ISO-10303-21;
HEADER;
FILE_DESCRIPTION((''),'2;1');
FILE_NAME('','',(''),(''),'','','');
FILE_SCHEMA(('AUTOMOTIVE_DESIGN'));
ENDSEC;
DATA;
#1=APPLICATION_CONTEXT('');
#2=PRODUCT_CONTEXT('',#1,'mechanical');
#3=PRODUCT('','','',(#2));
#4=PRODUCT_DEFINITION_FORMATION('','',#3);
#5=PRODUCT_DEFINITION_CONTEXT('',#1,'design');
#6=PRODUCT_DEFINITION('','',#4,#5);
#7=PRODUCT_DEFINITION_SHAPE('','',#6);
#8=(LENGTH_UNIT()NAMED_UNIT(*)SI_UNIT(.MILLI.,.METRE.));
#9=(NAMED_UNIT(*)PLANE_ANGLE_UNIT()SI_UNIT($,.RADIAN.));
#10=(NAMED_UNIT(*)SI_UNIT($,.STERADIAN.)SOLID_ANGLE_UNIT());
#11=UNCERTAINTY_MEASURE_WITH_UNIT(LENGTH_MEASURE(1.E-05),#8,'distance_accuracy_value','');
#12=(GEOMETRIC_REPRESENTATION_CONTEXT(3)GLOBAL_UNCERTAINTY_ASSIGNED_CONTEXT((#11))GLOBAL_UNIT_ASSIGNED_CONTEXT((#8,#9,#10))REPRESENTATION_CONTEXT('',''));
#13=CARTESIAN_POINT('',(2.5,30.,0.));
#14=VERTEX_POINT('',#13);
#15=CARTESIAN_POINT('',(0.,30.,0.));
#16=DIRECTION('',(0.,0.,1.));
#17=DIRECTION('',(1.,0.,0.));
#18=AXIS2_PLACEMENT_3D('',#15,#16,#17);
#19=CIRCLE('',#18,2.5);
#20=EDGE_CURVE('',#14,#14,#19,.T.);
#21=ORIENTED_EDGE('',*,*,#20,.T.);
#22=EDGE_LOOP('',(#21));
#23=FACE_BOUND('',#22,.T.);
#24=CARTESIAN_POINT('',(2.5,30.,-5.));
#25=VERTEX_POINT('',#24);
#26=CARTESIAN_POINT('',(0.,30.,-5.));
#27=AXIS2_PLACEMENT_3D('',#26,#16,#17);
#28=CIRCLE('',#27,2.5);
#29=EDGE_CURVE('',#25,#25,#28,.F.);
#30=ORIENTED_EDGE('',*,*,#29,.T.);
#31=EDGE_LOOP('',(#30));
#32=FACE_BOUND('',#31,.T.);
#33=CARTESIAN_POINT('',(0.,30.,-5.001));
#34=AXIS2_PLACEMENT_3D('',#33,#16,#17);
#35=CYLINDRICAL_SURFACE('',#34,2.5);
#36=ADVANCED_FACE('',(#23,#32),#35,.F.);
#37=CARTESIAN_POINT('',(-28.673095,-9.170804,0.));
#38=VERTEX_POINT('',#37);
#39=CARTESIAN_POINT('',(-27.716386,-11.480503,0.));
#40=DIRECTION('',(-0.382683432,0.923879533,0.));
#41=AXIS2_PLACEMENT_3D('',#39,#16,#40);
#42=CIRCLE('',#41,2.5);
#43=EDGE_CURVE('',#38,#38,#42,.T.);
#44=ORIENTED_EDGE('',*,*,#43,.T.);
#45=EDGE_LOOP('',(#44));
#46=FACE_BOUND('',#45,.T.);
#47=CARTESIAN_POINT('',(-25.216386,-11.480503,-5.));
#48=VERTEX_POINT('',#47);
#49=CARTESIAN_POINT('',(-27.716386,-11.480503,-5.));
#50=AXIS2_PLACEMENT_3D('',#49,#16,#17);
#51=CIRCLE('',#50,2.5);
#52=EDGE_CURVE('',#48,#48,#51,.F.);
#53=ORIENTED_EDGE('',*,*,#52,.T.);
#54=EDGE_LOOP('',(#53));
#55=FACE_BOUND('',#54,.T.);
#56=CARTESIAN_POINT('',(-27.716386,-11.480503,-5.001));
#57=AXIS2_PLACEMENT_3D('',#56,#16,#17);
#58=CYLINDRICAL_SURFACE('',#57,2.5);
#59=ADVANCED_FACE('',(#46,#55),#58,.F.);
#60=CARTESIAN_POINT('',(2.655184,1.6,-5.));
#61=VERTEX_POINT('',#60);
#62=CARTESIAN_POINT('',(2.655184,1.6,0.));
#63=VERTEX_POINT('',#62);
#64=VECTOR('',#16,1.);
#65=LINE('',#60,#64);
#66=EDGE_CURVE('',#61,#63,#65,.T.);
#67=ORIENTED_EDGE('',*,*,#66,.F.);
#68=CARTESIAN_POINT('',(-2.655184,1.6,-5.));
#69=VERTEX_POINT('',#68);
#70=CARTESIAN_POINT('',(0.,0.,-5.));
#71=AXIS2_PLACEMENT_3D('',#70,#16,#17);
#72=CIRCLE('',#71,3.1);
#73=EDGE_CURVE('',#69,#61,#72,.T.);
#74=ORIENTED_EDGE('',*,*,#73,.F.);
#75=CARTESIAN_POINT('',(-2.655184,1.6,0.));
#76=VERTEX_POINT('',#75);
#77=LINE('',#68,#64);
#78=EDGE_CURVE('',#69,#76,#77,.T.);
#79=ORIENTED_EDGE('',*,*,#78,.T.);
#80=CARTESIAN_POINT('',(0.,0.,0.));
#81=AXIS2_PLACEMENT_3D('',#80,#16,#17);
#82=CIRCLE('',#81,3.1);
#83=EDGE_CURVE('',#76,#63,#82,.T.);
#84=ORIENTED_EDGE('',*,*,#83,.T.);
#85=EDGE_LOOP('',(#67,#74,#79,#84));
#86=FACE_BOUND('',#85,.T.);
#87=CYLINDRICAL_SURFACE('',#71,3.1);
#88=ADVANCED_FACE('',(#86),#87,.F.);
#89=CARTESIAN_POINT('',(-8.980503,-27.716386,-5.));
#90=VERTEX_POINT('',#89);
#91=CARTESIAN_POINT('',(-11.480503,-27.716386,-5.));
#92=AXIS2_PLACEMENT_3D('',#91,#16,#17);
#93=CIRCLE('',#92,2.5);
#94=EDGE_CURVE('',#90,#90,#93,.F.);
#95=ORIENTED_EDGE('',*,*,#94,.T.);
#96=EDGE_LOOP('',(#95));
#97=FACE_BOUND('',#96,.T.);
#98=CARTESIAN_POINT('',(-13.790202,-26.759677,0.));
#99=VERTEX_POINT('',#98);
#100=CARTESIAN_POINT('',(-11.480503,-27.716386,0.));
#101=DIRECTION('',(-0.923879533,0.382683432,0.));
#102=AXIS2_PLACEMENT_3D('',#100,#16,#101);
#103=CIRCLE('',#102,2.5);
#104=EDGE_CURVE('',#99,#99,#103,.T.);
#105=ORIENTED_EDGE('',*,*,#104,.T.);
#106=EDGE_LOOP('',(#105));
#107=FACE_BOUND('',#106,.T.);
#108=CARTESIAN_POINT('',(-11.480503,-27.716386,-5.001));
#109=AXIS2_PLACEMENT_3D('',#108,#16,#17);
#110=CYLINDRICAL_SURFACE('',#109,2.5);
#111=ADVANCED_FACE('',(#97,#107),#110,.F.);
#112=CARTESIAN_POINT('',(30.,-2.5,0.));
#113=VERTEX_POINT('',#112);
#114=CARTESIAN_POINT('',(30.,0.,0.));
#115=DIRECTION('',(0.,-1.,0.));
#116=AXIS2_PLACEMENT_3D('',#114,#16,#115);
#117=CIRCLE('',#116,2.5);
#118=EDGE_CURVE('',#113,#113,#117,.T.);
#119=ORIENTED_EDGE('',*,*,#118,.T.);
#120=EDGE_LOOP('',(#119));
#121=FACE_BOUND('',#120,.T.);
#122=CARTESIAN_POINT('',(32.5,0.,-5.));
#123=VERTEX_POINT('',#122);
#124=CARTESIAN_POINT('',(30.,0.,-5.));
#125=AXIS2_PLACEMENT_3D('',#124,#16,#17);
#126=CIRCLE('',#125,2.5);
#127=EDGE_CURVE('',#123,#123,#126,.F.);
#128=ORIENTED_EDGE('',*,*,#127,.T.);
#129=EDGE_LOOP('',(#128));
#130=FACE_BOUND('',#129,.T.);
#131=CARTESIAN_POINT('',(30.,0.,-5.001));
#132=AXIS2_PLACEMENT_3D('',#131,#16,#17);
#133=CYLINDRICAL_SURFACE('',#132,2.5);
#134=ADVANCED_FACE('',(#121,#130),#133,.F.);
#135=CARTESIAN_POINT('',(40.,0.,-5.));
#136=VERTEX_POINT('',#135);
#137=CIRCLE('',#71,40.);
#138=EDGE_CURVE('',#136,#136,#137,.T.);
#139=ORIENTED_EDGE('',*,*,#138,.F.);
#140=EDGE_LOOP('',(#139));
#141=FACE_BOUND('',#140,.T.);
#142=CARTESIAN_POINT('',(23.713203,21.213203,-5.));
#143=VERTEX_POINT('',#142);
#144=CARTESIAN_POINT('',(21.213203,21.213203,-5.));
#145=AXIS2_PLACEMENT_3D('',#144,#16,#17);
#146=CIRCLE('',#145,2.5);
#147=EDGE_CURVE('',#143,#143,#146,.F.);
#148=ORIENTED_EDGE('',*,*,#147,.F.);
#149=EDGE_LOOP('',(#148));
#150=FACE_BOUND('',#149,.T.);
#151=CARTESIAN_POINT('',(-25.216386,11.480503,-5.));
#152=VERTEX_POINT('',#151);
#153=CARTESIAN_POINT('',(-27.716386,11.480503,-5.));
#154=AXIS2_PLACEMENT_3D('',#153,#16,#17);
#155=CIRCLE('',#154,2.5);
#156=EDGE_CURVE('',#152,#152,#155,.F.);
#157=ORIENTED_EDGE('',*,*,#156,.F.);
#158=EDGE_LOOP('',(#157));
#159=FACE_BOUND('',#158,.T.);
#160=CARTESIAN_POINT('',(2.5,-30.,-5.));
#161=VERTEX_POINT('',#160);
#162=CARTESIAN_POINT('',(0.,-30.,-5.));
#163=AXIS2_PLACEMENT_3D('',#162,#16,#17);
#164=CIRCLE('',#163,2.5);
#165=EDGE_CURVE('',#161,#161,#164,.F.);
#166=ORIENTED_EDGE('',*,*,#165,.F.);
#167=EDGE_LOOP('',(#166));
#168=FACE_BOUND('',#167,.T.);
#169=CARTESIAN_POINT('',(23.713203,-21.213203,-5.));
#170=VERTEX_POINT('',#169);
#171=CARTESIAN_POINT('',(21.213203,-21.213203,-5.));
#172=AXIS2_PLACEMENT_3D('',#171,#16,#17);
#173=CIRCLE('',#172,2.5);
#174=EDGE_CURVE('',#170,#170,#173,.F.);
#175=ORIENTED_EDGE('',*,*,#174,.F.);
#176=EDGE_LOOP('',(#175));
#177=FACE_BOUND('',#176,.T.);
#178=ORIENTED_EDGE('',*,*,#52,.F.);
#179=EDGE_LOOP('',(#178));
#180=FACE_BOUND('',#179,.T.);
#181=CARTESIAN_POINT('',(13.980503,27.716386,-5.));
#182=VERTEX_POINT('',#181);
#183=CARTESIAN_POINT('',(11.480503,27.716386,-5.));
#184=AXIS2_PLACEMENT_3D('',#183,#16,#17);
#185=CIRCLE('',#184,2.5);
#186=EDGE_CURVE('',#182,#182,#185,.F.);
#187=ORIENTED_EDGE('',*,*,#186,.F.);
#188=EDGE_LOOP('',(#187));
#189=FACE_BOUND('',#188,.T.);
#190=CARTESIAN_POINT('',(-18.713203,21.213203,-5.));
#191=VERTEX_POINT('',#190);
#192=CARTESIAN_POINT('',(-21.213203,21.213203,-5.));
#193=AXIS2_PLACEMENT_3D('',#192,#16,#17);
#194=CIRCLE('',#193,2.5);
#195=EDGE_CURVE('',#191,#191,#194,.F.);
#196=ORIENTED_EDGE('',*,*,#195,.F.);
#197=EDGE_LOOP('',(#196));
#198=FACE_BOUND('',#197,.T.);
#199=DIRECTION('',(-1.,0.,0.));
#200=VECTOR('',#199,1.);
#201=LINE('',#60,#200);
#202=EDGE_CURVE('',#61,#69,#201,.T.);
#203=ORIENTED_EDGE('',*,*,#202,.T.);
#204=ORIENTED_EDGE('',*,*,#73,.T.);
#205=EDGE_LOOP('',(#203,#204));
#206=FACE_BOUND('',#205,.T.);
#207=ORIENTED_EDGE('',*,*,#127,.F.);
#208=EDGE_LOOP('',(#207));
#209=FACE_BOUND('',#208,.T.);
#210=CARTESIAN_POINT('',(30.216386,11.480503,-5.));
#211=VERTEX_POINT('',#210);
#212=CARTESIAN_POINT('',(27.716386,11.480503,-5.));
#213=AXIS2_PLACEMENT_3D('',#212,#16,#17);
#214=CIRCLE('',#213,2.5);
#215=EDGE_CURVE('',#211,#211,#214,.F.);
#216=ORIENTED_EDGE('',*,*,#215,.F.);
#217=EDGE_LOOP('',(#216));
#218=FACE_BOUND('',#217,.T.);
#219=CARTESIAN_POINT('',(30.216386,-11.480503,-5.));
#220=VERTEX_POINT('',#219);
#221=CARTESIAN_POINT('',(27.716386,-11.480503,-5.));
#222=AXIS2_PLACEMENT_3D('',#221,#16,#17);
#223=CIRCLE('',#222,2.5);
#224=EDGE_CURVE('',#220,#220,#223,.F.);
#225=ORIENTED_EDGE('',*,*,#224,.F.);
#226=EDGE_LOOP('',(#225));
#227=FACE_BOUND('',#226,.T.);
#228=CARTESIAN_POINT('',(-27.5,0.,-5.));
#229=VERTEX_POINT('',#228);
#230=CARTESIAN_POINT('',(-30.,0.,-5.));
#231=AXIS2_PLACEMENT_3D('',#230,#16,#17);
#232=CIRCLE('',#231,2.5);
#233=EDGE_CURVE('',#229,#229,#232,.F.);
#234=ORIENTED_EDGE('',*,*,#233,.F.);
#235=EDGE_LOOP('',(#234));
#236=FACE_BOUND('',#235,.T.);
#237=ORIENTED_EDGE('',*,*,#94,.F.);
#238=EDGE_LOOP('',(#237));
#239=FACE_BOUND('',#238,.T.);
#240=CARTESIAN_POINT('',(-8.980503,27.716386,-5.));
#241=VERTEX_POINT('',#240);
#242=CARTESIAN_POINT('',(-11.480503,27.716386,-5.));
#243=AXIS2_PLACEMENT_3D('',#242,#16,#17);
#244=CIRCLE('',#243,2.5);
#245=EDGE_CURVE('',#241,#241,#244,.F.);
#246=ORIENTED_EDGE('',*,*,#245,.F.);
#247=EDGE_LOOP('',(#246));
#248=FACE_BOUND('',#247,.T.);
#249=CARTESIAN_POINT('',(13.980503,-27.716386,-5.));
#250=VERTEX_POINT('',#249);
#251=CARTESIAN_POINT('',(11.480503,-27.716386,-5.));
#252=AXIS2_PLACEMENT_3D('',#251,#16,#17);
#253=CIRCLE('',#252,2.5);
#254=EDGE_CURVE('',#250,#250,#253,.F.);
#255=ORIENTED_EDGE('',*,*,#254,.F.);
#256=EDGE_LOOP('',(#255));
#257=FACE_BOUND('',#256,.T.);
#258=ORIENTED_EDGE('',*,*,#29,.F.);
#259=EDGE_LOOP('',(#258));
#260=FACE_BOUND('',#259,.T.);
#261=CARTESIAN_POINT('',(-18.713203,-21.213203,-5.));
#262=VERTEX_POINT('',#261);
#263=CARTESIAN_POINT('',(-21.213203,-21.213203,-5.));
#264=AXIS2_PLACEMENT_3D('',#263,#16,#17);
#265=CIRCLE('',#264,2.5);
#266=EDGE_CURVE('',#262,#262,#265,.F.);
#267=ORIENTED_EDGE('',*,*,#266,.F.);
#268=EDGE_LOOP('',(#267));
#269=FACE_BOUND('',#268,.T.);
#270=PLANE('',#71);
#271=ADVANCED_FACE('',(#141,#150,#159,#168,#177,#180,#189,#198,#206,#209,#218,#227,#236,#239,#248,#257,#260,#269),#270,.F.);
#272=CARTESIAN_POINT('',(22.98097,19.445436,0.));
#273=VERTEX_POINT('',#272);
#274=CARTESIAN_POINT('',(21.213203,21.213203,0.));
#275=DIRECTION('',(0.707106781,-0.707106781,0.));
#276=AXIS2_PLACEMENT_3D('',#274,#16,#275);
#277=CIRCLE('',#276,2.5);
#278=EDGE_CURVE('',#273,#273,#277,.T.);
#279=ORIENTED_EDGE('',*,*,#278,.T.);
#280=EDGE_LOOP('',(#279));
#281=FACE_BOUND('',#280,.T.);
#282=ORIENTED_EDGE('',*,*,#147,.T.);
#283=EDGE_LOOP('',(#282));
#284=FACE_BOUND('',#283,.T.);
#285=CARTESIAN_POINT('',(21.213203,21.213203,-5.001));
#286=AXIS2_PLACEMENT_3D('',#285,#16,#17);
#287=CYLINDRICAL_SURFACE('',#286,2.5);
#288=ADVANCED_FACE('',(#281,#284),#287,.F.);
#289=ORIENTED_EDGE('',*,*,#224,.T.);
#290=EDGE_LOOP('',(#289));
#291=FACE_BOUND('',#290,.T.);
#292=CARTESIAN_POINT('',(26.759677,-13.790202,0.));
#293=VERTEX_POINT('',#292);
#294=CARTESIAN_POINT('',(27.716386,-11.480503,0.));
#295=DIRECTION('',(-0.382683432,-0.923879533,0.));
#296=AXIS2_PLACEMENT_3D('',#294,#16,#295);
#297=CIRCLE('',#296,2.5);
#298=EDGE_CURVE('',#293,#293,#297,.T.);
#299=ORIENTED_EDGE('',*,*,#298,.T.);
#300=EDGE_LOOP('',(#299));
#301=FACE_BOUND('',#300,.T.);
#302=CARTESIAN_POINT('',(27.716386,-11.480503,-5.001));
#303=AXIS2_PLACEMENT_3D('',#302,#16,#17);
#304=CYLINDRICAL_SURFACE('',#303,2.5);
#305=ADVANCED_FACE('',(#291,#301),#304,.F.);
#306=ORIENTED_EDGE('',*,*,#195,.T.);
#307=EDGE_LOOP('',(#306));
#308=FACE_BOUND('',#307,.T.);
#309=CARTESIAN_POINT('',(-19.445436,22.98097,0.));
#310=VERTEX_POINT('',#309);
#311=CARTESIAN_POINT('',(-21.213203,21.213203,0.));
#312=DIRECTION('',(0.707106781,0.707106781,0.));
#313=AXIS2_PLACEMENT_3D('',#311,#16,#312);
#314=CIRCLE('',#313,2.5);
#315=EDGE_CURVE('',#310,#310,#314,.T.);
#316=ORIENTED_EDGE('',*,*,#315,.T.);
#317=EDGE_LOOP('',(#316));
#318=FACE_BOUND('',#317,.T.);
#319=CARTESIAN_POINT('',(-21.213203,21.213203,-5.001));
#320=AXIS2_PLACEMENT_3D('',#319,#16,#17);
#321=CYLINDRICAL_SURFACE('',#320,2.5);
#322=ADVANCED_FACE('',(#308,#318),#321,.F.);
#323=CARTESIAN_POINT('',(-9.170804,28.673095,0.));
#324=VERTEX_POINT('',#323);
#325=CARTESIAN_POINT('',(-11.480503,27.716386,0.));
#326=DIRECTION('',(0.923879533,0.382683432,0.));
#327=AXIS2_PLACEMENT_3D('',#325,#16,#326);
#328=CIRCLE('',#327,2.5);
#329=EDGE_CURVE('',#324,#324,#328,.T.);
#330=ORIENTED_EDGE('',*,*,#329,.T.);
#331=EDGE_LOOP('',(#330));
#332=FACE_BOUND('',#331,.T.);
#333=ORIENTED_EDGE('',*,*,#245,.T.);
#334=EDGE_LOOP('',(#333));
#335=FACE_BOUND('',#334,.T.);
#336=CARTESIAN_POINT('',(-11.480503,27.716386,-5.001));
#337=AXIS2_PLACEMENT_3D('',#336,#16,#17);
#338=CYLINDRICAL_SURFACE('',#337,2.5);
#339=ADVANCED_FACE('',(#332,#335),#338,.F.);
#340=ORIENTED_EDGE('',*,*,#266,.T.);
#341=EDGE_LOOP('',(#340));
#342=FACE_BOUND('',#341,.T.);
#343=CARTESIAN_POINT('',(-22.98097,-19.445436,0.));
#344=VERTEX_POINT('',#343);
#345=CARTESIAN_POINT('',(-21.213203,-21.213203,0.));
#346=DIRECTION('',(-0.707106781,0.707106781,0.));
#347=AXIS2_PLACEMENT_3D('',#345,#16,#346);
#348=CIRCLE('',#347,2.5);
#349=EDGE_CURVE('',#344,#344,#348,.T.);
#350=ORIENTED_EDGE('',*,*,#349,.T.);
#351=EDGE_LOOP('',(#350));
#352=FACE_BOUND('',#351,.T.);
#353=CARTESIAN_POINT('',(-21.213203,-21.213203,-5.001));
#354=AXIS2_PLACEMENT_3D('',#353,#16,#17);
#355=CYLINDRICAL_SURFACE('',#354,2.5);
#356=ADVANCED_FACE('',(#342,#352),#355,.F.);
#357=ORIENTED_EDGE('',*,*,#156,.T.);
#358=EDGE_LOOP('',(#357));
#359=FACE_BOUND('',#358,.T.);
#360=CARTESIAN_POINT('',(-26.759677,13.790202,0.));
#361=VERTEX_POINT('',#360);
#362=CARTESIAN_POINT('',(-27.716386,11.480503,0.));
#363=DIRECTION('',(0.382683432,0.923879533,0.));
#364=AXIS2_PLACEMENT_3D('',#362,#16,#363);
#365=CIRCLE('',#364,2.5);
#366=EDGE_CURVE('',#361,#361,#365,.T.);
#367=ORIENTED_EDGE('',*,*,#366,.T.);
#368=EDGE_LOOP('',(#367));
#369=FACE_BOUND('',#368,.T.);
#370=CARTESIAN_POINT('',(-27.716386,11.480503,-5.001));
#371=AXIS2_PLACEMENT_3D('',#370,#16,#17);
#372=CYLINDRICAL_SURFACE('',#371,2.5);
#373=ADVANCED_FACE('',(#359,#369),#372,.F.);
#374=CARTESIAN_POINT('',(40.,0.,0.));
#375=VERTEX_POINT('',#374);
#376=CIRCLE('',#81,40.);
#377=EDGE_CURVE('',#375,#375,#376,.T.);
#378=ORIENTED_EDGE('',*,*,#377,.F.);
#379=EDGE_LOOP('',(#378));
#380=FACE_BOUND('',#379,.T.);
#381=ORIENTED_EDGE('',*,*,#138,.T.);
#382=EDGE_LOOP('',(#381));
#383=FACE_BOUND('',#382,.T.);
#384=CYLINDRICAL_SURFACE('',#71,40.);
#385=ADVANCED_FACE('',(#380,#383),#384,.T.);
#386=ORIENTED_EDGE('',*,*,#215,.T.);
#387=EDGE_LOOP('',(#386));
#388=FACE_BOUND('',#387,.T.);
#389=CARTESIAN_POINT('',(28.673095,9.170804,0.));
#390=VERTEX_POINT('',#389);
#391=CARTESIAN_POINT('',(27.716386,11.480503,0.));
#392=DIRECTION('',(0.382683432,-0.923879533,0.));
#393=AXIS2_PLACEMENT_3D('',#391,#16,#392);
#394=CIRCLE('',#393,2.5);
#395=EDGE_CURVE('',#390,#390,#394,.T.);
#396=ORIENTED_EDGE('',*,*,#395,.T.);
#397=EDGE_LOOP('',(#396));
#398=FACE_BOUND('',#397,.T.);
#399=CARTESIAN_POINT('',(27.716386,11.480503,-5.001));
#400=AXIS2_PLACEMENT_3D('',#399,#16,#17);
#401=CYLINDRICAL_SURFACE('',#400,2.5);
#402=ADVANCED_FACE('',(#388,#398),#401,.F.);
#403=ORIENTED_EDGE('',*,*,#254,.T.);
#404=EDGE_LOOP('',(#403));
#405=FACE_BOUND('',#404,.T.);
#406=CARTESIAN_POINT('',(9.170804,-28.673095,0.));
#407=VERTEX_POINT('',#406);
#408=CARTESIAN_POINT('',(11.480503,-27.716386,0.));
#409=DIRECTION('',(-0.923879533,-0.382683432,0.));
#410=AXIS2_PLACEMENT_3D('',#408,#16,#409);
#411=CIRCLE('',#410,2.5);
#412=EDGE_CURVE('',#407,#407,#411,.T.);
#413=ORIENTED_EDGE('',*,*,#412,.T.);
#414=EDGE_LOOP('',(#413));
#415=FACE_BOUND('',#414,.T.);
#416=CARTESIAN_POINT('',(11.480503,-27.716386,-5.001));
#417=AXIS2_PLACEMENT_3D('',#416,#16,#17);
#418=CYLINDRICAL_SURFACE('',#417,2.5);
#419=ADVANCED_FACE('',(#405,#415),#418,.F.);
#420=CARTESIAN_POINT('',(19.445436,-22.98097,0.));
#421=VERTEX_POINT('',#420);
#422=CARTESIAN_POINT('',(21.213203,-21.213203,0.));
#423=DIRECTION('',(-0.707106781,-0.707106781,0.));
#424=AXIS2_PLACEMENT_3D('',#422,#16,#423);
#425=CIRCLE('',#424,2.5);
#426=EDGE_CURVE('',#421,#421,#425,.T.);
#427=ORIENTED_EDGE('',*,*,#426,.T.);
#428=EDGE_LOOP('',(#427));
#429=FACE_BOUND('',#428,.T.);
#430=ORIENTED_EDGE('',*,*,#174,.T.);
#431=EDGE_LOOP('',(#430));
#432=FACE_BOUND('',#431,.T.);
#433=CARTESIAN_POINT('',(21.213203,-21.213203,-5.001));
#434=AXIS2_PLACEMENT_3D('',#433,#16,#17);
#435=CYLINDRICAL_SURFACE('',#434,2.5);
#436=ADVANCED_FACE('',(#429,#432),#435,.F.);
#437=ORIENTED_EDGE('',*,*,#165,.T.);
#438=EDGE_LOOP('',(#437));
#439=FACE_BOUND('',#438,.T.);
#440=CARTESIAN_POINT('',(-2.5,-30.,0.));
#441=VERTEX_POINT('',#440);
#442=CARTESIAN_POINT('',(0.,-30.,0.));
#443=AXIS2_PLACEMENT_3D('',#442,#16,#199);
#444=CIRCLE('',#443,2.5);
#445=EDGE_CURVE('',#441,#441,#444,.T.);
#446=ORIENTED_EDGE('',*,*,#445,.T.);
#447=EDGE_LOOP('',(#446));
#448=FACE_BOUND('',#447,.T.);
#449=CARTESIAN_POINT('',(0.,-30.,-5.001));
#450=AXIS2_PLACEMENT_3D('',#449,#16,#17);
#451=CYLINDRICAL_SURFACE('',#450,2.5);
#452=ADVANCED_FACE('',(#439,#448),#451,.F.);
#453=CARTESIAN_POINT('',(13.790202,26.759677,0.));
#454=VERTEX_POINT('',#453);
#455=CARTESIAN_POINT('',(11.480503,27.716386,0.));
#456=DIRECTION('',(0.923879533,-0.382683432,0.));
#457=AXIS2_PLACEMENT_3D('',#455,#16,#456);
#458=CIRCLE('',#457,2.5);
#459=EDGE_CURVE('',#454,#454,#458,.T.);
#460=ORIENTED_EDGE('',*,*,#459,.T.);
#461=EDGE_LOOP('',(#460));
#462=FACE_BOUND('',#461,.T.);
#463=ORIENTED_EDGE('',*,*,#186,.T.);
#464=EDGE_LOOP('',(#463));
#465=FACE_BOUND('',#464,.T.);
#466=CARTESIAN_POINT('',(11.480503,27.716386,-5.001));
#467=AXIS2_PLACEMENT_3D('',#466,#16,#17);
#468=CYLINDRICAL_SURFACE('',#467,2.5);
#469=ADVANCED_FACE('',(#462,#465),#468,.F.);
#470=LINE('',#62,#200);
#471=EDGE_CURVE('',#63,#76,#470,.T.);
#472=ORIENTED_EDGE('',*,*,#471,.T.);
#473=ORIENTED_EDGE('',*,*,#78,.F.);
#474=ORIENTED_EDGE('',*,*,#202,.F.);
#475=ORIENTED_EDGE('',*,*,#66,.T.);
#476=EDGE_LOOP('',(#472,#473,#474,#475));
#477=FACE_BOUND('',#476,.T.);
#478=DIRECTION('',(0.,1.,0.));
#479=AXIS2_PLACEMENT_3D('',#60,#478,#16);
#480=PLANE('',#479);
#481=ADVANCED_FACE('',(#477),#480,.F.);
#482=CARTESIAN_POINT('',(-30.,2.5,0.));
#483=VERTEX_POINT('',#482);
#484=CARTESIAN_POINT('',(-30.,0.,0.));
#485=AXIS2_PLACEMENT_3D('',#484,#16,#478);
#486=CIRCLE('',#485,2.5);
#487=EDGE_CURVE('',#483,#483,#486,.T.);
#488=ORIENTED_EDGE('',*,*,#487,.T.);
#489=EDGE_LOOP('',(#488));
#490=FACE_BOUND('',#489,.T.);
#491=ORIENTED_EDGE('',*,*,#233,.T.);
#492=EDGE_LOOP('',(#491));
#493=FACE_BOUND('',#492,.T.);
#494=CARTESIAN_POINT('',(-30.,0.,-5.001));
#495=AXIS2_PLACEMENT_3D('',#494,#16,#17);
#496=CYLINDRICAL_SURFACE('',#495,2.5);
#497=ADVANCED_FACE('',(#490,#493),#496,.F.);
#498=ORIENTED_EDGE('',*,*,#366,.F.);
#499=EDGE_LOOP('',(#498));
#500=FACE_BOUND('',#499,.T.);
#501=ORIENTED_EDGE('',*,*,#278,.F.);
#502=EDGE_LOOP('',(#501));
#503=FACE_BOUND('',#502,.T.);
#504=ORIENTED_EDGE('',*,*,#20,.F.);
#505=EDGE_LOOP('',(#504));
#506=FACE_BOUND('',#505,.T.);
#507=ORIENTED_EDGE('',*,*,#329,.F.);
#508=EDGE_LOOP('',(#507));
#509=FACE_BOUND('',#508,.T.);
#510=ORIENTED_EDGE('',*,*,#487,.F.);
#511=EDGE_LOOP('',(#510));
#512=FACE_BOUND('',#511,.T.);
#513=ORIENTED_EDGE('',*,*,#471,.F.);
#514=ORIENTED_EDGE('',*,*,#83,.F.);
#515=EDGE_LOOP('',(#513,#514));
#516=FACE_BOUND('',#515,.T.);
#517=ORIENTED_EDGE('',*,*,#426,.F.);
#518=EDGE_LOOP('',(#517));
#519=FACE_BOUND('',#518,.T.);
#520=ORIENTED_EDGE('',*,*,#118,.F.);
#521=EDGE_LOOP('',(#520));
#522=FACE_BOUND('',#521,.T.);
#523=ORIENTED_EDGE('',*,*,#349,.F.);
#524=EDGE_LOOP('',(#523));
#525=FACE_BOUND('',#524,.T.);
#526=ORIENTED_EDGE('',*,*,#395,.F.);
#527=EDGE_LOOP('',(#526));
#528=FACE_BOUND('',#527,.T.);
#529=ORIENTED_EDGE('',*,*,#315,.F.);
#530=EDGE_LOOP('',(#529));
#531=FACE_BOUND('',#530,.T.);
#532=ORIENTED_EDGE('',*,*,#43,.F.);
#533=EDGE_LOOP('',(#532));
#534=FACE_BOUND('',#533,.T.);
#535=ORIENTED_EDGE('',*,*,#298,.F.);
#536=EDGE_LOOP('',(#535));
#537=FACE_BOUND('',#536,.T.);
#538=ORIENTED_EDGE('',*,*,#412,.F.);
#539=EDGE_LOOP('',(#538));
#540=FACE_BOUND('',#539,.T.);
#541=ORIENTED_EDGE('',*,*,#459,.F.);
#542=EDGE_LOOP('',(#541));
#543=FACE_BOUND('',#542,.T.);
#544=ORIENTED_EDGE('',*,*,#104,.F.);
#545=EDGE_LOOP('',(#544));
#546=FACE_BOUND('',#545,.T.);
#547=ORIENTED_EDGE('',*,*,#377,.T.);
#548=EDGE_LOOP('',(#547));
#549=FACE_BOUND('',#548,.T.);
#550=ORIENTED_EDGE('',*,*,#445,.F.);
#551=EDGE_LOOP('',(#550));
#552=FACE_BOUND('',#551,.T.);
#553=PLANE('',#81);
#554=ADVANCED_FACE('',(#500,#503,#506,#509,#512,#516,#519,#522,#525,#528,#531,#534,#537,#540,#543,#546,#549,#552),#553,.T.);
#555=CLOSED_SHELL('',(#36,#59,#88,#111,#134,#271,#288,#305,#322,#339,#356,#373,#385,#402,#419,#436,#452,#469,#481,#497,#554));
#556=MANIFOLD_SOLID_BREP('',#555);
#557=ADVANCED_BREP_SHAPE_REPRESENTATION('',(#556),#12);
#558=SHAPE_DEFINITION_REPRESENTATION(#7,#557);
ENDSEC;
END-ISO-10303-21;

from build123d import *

# Parameters (mm, degrees)
SKETCH1_R          = 40
BASE_FLANGE1_DEPTH = 5
CUT_EXTRUDE1_REACH = 58.789
SKETCH6_R          = 2.5
CIRPATTERN1_COUNT  = 16


# Sheet-metal steps are written as plain solids
with BuildPart() as part:
    # Sketch1 → Base-Flange1 (new body)
    with BuildSketch(Plane.XY):
        Circle(SKETCH1_R)
        with BuildLine():
            Line((2.655183609, 1.6), (-2.655183609, 1.6))
            ThreePointArc((-2.655183609, 1.6), (0, -3.1), (2.655183609, 1.6))
        make_face(mode=Mode.SUBTRACT)
    extrude(amount=-BASE_FLANGE1_DEPTH)

    # Sketch6 → Cut-Extrude1 (cut, up to next)
    with BuildSketch(Plane.XY, mode=Mode.PRIVATE) as cut_extrude1_sk1:
        with Locations((0, 30)):
            Circle(SKETCH6_R)
    cut_extrude1_tool1 = extrude(cut_extrude1_sk1.sketch, amount=-CUT_EXTRUDE1_REACH, mode=Mode.PRIVATE) & part.part
    cut_extrude1 = cut_extrude1_tool1.solids().sort_by_distance((0, 30, 0))[0]
    add(cut_extrude1, mode=Mode.SUBTRACT)

    # CirPattern1: Cut-Extrude1 ×16 about axis
    cirpattern1_axis = Axis((0, 0, 0), (0, 0, 1))
    for i in range(1, CIRPATTERN1_COUNT):
        add(cut_extrude1.rotate(cirpattern1_axis, i * 360 / CIRPATTERN1_COUNT), mode=Mode.SUBTRACT)


solid = part.part
